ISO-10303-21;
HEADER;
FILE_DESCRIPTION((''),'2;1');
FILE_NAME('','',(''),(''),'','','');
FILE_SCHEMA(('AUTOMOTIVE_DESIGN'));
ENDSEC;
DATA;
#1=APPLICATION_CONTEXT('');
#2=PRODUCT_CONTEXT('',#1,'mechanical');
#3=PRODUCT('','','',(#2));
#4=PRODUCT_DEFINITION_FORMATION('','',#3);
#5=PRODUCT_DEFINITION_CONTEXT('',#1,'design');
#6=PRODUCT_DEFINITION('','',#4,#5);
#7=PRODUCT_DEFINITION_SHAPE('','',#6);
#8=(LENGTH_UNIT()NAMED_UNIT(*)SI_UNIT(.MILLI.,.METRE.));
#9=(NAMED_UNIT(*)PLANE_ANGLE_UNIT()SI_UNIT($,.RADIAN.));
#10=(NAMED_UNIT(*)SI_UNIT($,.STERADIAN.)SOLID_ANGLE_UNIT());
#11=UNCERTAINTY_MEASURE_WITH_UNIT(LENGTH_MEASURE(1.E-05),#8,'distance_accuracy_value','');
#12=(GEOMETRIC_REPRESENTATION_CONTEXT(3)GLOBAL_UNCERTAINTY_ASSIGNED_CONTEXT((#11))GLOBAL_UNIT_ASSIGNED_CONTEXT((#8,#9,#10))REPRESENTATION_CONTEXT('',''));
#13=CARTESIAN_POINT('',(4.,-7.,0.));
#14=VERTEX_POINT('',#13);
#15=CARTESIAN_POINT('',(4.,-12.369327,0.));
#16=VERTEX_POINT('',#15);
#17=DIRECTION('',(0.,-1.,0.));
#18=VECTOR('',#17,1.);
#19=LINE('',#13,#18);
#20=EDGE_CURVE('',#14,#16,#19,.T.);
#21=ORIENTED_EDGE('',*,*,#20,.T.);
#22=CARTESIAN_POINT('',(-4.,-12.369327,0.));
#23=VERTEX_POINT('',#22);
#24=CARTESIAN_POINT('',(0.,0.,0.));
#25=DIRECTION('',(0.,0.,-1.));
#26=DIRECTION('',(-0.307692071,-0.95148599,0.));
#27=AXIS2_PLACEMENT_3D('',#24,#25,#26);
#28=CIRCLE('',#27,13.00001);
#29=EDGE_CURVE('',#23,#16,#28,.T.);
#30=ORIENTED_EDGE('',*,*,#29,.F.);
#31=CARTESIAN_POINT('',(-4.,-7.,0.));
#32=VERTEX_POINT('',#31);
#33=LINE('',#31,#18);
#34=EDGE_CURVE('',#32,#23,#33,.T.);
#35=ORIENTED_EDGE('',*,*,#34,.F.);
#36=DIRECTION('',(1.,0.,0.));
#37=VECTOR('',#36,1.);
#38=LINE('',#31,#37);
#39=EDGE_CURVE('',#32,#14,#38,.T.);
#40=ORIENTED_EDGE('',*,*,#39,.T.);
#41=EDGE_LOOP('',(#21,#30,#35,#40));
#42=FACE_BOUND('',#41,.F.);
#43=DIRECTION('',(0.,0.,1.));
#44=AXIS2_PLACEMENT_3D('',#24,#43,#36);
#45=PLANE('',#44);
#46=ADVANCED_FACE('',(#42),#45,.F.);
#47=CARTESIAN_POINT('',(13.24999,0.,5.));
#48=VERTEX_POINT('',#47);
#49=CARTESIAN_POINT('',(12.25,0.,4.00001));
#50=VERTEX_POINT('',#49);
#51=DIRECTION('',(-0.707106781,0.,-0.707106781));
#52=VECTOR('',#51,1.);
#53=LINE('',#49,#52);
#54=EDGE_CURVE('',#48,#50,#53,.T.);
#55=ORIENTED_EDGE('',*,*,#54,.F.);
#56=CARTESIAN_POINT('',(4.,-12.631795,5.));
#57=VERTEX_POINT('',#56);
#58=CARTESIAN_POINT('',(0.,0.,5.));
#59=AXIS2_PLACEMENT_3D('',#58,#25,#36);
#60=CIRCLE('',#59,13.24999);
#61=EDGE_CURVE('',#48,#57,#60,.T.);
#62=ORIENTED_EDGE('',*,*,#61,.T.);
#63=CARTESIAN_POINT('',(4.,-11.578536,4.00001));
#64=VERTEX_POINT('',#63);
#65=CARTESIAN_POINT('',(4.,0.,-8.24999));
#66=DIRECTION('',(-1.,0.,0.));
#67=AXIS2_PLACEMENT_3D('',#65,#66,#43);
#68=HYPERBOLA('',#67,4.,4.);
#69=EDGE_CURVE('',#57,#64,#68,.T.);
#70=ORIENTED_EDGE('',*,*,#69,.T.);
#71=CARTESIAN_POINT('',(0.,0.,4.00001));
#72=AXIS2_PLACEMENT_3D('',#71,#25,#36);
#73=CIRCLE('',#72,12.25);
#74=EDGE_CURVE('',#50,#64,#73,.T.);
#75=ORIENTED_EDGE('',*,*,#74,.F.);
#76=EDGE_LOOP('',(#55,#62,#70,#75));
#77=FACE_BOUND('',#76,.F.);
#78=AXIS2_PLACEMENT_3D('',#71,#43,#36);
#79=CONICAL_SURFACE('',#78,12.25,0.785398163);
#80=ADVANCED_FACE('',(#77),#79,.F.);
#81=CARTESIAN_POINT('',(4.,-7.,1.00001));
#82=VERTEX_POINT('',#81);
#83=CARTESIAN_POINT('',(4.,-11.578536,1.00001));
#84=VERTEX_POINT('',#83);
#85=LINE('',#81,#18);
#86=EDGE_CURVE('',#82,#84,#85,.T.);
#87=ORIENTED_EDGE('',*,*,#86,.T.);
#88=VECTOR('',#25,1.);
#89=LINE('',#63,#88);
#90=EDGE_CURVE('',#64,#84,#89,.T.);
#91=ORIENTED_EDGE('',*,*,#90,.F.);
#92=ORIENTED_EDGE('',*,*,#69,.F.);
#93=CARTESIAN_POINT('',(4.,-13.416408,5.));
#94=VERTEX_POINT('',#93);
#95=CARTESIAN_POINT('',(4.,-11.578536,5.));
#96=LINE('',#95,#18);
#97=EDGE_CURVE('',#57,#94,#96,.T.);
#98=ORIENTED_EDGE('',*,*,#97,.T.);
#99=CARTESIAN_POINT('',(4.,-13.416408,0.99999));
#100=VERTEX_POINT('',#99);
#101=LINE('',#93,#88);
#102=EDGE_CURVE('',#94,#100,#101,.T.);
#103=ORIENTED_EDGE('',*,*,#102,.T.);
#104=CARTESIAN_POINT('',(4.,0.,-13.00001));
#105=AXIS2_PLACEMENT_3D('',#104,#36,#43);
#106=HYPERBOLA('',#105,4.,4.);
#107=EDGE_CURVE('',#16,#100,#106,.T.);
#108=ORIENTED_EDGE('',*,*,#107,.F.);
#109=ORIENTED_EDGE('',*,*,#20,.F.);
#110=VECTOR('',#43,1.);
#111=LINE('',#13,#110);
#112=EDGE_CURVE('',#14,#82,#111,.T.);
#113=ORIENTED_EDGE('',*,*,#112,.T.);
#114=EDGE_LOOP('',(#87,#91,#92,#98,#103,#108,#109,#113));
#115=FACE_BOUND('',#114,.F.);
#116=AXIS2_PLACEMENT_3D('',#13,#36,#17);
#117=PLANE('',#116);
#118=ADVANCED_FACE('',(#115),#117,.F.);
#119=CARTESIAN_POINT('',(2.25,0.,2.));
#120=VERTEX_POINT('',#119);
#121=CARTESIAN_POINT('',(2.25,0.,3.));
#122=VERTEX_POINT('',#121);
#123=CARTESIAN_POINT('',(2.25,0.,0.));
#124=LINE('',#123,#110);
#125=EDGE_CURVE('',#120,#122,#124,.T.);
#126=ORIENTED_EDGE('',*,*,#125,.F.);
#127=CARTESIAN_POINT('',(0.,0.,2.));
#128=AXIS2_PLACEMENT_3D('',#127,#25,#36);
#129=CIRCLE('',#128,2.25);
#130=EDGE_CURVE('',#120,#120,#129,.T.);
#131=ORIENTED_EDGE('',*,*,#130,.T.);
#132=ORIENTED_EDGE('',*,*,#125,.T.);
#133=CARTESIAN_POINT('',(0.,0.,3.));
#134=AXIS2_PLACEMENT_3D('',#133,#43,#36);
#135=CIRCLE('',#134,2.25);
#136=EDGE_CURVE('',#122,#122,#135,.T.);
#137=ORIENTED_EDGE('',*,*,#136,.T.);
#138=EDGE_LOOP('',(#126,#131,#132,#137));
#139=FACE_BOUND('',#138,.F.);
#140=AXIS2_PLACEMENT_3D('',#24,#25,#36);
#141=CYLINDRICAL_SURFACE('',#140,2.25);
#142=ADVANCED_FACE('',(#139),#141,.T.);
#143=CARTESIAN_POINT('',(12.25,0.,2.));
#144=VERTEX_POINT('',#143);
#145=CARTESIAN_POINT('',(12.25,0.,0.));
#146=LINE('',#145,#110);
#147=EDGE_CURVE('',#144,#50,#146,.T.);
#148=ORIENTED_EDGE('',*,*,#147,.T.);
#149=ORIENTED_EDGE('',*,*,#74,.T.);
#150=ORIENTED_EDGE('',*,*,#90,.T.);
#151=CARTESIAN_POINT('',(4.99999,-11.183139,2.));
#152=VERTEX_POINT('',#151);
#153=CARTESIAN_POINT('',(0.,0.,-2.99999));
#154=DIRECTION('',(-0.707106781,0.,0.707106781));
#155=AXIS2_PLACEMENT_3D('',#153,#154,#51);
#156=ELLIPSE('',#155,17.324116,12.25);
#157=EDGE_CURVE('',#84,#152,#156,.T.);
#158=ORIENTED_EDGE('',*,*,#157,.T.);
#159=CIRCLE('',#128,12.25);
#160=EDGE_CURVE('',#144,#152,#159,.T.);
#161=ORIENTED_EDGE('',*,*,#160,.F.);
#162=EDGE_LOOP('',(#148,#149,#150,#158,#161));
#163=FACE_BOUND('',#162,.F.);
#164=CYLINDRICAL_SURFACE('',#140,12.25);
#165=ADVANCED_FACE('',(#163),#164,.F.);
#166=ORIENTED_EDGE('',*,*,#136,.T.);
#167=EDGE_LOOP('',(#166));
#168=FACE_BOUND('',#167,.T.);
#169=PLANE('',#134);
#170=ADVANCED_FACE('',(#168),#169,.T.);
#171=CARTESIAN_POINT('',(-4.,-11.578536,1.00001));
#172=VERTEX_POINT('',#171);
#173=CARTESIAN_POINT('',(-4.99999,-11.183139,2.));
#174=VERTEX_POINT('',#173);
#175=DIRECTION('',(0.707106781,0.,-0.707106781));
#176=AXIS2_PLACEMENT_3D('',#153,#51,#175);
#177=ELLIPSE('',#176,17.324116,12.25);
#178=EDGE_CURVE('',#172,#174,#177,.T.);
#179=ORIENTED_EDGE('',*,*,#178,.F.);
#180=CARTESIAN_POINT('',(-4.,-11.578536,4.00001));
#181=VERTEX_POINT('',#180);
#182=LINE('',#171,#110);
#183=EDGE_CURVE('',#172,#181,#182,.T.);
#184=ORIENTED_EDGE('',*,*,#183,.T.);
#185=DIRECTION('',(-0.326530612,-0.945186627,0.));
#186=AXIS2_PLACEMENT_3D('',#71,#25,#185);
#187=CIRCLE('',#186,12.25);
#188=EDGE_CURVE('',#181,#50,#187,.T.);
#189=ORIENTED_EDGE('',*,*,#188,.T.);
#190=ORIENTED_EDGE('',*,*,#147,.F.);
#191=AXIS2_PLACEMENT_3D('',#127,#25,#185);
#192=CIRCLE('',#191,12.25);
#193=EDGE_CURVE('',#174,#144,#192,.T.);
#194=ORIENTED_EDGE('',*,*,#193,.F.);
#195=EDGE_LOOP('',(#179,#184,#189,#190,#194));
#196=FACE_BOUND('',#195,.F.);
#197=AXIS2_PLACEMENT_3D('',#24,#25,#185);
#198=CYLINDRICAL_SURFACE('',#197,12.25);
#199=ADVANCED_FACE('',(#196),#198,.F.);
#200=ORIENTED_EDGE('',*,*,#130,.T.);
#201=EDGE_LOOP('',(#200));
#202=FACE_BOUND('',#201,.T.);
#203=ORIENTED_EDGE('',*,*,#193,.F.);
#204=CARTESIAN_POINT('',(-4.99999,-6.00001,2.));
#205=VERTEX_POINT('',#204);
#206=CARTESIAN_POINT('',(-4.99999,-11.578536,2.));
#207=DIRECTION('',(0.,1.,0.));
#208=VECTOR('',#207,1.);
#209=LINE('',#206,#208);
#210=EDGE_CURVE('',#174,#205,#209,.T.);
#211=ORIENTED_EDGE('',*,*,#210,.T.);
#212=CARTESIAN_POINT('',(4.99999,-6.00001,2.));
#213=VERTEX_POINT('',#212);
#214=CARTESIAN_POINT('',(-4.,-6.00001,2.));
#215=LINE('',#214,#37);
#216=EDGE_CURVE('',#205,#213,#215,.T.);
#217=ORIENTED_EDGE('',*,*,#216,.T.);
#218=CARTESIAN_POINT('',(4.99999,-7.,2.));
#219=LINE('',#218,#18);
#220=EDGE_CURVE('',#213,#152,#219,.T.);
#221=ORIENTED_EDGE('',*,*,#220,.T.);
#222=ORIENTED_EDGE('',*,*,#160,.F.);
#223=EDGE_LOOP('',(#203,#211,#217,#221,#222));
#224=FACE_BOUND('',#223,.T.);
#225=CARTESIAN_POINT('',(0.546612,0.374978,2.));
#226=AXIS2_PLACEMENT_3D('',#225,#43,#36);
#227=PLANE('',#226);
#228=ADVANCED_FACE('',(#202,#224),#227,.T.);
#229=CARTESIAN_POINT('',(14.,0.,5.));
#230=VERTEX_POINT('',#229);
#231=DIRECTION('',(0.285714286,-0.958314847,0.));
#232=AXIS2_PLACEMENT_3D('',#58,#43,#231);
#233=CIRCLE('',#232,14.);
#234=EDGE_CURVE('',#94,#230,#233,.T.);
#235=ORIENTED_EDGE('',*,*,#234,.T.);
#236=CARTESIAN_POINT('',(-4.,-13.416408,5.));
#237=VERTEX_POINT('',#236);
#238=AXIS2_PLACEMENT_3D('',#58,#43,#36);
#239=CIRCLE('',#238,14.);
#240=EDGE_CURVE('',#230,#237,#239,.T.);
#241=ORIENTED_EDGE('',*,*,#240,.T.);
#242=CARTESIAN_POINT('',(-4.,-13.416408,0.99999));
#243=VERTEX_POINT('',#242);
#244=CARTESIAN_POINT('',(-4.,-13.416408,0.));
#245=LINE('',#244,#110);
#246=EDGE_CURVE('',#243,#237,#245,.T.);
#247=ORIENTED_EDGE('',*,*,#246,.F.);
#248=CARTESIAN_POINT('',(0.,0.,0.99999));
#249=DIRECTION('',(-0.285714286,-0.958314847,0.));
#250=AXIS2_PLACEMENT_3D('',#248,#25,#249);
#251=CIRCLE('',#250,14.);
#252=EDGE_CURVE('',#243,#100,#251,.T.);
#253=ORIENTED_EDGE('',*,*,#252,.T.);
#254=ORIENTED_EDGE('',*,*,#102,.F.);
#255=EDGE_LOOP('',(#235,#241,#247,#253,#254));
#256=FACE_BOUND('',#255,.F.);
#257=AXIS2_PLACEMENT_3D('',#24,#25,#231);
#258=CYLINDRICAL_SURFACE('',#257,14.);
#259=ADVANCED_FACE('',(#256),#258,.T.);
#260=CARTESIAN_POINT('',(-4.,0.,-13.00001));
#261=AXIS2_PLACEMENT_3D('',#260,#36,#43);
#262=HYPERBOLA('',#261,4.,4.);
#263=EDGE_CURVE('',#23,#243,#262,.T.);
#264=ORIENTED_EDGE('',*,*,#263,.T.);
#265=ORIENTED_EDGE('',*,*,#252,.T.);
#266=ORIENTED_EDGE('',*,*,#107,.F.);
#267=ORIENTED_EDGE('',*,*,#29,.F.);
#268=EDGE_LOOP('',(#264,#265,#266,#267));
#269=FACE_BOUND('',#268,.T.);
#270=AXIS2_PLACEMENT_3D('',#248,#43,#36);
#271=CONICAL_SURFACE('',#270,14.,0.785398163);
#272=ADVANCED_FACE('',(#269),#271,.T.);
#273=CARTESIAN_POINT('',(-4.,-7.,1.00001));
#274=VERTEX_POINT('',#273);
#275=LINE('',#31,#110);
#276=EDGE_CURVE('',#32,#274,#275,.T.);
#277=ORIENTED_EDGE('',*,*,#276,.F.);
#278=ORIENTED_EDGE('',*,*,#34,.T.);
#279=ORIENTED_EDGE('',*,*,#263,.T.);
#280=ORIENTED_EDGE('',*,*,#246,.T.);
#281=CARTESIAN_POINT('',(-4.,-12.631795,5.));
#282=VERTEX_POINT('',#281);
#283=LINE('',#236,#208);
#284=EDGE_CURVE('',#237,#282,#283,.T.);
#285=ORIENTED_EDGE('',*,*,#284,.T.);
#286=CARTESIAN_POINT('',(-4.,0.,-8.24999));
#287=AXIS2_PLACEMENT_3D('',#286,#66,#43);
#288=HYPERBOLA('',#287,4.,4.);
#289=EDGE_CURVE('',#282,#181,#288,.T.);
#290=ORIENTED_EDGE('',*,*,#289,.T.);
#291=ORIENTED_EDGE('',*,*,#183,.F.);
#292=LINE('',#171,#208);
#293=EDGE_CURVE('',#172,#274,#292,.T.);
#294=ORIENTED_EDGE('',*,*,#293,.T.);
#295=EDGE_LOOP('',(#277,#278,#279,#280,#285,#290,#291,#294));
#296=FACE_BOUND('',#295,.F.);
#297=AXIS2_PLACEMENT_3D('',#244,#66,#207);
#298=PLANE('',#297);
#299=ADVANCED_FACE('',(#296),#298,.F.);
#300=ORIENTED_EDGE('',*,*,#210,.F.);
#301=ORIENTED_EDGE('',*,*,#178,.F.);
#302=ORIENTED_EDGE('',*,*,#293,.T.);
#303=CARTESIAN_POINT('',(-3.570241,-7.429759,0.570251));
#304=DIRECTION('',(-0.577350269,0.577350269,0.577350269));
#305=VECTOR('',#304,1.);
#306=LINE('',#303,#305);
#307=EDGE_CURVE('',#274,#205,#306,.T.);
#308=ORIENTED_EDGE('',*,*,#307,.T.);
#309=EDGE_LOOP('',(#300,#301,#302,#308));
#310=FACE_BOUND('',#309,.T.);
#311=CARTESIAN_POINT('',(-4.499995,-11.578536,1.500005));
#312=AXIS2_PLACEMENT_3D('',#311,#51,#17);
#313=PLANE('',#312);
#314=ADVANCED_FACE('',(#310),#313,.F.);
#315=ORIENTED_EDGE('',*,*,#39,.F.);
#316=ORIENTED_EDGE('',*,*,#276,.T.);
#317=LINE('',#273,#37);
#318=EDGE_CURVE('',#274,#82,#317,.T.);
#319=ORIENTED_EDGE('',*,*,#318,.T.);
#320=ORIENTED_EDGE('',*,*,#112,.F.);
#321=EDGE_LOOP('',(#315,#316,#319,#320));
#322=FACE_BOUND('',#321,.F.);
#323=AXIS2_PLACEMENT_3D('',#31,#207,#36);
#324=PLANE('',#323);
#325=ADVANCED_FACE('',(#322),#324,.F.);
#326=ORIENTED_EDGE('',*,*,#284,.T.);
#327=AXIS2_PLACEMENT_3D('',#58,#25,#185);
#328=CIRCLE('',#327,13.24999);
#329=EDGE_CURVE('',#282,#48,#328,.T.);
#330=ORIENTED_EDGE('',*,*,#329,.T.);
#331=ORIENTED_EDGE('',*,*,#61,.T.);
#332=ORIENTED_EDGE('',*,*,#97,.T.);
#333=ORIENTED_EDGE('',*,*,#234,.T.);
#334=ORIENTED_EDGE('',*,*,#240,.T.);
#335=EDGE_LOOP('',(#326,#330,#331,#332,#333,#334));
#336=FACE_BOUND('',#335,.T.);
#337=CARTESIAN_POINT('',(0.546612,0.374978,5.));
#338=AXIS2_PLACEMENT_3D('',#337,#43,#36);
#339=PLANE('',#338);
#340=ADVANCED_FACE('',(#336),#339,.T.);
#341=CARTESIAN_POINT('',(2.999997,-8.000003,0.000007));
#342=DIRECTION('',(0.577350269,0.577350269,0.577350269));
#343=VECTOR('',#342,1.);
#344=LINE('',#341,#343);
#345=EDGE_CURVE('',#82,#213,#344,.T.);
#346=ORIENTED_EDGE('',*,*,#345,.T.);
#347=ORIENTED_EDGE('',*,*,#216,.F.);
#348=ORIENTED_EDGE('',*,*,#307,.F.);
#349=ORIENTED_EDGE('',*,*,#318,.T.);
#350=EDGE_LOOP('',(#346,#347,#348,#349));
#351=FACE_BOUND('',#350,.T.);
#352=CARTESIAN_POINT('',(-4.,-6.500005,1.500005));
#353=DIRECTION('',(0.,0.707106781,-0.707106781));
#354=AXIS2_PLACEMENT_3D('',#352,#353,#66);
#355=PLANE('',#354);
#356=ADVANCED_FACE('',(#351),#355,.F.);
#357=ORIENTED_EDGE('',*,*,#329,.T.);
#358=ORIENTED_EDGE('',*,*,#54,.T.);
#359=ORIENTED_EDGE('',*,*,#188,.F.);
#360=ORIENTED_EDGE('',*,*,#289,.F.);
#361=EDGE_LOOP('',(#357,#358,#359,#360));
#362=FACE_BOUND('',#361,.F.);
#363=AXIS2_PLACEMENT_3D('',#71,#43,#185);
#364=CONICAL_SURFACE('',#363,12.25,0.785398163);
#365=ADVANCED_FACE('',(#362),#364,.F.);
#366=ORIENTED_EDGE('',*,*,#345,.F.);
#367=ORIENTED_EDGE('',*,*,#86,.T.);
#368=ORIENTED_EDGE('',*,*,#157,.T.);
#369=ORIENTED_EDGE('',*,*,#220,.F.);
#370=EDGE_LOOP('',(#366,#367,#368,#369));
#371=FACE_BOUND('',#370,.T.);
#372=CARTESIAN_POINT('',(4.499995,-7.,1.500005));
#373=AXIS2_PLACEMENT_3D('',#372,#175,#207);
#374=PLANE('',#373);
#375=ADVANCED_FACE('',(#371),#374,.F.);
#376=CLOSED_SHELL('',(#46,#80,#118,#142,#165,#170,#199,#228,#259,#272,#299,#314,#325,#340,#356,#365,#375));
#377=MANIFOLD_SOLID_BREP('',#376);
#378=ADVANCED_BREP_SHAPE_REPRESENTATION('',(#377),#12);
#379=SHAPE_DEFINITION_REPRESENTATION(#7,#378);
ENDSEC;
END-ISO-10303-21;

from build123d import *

# Parameters (mm, degrees)
F0_R     = 2.25
F1_DEPTH = 2
F2_DEPTH = 5
F3_DEPTH = 3
F4_SIZE  = 0.99999


# Not quite as in the source:
# - a fillet or chamfer is up to 0.001 mm smaller than in the source, because OpenCascade refuses the exact size


with BuildPart() as f1:
    # F0 (on Top) → F1 (new body)
    with BuildSketch(Plane.XY):
        with BuildLine():
            ThreePointArc((4, -13.416407865), (11.2249721603, -8.3666002653), (14, 0))
            ThreePointArc((14, 0), (-8.3666002653, 11.2249721603), (-4, -13.416407865))
            Line((-4, -13.416407865), (-4, -11.5785361769))
            ThreePointArc((-4, -11.5785361769), (-7.1085336041, 9.9765349696), (12.25, 0))
            ThreePointArc((12.25, 0), (9.9765349696, -7.1085336041), (4, -11.5785361769))
            Line((4, -11.5785361769), (4, -13.416407865))
        make_face()
        with BuildLine():
            ThreePointArc((12.25, 0), (-7.1085336041, 9.9765349696), (-4, -11.5785361769))
            Line((-4, -11.5785361769), (-4, -7))
            Line((-4, -7), (4, -7))
            Line((4, -7), (4, -11.5785361769))
            ThreePointArc((4, -11.5785361769), (9.9765349696, -7.1085336041), (12.25, 0))
        make_face()
        Circle(F0_R, mode=Mode.SUBTRACT)
        Circle(F0_R)
    extrude(amount=F1_DEPTH)

    # F0 (on Top) → F2 (join)
    with BuildSketch(Plane.XY):
        with BuildLine():
            ThreePointArc((4, -13.416407865), (11.2249721603, -8.3666002653), (14, 0))
            ThreePointArc((14, 0), (-8.3666002653, 11.2249721603), (-4, -13.416407865))
            Line((-4, -13.416407865), (-4, -11.5785361769))
            ThreePointArc((-4, -11.5785361769), (-7.1085336041, 9.9765349696), (12.25, 0))
            ThreePointArc((12.25, 0), (9.9765349696, -7.1085336041), (4, -11.5785361769))
            Line((4, -11.5785361769), (4, -13.416407865))
        make_face()
    extrude(amount=F2_DEPTH)

    # F0 (on Top) → F3 (join)
    with BuildSketch(Plane.XY):
        Circle(F0_R)
    extrude(amount=F3_DEPTH)

    # F4 (size 1 in the source; OpenCascade refuses exactly that, so slightly less here)
    f4_edges = [f1.edges().sort_by_distance(p)[0] for p in [
        (0, 14, 0),
        (-7.108534, 9.976535, 5),
        (0, -7, 2),
        (-4, -9.289268, 2),
        (4, -9.289268, 2),
    ]]
    chamfer(f4_edges, length=F4_SIZE)


solid = f1.part
